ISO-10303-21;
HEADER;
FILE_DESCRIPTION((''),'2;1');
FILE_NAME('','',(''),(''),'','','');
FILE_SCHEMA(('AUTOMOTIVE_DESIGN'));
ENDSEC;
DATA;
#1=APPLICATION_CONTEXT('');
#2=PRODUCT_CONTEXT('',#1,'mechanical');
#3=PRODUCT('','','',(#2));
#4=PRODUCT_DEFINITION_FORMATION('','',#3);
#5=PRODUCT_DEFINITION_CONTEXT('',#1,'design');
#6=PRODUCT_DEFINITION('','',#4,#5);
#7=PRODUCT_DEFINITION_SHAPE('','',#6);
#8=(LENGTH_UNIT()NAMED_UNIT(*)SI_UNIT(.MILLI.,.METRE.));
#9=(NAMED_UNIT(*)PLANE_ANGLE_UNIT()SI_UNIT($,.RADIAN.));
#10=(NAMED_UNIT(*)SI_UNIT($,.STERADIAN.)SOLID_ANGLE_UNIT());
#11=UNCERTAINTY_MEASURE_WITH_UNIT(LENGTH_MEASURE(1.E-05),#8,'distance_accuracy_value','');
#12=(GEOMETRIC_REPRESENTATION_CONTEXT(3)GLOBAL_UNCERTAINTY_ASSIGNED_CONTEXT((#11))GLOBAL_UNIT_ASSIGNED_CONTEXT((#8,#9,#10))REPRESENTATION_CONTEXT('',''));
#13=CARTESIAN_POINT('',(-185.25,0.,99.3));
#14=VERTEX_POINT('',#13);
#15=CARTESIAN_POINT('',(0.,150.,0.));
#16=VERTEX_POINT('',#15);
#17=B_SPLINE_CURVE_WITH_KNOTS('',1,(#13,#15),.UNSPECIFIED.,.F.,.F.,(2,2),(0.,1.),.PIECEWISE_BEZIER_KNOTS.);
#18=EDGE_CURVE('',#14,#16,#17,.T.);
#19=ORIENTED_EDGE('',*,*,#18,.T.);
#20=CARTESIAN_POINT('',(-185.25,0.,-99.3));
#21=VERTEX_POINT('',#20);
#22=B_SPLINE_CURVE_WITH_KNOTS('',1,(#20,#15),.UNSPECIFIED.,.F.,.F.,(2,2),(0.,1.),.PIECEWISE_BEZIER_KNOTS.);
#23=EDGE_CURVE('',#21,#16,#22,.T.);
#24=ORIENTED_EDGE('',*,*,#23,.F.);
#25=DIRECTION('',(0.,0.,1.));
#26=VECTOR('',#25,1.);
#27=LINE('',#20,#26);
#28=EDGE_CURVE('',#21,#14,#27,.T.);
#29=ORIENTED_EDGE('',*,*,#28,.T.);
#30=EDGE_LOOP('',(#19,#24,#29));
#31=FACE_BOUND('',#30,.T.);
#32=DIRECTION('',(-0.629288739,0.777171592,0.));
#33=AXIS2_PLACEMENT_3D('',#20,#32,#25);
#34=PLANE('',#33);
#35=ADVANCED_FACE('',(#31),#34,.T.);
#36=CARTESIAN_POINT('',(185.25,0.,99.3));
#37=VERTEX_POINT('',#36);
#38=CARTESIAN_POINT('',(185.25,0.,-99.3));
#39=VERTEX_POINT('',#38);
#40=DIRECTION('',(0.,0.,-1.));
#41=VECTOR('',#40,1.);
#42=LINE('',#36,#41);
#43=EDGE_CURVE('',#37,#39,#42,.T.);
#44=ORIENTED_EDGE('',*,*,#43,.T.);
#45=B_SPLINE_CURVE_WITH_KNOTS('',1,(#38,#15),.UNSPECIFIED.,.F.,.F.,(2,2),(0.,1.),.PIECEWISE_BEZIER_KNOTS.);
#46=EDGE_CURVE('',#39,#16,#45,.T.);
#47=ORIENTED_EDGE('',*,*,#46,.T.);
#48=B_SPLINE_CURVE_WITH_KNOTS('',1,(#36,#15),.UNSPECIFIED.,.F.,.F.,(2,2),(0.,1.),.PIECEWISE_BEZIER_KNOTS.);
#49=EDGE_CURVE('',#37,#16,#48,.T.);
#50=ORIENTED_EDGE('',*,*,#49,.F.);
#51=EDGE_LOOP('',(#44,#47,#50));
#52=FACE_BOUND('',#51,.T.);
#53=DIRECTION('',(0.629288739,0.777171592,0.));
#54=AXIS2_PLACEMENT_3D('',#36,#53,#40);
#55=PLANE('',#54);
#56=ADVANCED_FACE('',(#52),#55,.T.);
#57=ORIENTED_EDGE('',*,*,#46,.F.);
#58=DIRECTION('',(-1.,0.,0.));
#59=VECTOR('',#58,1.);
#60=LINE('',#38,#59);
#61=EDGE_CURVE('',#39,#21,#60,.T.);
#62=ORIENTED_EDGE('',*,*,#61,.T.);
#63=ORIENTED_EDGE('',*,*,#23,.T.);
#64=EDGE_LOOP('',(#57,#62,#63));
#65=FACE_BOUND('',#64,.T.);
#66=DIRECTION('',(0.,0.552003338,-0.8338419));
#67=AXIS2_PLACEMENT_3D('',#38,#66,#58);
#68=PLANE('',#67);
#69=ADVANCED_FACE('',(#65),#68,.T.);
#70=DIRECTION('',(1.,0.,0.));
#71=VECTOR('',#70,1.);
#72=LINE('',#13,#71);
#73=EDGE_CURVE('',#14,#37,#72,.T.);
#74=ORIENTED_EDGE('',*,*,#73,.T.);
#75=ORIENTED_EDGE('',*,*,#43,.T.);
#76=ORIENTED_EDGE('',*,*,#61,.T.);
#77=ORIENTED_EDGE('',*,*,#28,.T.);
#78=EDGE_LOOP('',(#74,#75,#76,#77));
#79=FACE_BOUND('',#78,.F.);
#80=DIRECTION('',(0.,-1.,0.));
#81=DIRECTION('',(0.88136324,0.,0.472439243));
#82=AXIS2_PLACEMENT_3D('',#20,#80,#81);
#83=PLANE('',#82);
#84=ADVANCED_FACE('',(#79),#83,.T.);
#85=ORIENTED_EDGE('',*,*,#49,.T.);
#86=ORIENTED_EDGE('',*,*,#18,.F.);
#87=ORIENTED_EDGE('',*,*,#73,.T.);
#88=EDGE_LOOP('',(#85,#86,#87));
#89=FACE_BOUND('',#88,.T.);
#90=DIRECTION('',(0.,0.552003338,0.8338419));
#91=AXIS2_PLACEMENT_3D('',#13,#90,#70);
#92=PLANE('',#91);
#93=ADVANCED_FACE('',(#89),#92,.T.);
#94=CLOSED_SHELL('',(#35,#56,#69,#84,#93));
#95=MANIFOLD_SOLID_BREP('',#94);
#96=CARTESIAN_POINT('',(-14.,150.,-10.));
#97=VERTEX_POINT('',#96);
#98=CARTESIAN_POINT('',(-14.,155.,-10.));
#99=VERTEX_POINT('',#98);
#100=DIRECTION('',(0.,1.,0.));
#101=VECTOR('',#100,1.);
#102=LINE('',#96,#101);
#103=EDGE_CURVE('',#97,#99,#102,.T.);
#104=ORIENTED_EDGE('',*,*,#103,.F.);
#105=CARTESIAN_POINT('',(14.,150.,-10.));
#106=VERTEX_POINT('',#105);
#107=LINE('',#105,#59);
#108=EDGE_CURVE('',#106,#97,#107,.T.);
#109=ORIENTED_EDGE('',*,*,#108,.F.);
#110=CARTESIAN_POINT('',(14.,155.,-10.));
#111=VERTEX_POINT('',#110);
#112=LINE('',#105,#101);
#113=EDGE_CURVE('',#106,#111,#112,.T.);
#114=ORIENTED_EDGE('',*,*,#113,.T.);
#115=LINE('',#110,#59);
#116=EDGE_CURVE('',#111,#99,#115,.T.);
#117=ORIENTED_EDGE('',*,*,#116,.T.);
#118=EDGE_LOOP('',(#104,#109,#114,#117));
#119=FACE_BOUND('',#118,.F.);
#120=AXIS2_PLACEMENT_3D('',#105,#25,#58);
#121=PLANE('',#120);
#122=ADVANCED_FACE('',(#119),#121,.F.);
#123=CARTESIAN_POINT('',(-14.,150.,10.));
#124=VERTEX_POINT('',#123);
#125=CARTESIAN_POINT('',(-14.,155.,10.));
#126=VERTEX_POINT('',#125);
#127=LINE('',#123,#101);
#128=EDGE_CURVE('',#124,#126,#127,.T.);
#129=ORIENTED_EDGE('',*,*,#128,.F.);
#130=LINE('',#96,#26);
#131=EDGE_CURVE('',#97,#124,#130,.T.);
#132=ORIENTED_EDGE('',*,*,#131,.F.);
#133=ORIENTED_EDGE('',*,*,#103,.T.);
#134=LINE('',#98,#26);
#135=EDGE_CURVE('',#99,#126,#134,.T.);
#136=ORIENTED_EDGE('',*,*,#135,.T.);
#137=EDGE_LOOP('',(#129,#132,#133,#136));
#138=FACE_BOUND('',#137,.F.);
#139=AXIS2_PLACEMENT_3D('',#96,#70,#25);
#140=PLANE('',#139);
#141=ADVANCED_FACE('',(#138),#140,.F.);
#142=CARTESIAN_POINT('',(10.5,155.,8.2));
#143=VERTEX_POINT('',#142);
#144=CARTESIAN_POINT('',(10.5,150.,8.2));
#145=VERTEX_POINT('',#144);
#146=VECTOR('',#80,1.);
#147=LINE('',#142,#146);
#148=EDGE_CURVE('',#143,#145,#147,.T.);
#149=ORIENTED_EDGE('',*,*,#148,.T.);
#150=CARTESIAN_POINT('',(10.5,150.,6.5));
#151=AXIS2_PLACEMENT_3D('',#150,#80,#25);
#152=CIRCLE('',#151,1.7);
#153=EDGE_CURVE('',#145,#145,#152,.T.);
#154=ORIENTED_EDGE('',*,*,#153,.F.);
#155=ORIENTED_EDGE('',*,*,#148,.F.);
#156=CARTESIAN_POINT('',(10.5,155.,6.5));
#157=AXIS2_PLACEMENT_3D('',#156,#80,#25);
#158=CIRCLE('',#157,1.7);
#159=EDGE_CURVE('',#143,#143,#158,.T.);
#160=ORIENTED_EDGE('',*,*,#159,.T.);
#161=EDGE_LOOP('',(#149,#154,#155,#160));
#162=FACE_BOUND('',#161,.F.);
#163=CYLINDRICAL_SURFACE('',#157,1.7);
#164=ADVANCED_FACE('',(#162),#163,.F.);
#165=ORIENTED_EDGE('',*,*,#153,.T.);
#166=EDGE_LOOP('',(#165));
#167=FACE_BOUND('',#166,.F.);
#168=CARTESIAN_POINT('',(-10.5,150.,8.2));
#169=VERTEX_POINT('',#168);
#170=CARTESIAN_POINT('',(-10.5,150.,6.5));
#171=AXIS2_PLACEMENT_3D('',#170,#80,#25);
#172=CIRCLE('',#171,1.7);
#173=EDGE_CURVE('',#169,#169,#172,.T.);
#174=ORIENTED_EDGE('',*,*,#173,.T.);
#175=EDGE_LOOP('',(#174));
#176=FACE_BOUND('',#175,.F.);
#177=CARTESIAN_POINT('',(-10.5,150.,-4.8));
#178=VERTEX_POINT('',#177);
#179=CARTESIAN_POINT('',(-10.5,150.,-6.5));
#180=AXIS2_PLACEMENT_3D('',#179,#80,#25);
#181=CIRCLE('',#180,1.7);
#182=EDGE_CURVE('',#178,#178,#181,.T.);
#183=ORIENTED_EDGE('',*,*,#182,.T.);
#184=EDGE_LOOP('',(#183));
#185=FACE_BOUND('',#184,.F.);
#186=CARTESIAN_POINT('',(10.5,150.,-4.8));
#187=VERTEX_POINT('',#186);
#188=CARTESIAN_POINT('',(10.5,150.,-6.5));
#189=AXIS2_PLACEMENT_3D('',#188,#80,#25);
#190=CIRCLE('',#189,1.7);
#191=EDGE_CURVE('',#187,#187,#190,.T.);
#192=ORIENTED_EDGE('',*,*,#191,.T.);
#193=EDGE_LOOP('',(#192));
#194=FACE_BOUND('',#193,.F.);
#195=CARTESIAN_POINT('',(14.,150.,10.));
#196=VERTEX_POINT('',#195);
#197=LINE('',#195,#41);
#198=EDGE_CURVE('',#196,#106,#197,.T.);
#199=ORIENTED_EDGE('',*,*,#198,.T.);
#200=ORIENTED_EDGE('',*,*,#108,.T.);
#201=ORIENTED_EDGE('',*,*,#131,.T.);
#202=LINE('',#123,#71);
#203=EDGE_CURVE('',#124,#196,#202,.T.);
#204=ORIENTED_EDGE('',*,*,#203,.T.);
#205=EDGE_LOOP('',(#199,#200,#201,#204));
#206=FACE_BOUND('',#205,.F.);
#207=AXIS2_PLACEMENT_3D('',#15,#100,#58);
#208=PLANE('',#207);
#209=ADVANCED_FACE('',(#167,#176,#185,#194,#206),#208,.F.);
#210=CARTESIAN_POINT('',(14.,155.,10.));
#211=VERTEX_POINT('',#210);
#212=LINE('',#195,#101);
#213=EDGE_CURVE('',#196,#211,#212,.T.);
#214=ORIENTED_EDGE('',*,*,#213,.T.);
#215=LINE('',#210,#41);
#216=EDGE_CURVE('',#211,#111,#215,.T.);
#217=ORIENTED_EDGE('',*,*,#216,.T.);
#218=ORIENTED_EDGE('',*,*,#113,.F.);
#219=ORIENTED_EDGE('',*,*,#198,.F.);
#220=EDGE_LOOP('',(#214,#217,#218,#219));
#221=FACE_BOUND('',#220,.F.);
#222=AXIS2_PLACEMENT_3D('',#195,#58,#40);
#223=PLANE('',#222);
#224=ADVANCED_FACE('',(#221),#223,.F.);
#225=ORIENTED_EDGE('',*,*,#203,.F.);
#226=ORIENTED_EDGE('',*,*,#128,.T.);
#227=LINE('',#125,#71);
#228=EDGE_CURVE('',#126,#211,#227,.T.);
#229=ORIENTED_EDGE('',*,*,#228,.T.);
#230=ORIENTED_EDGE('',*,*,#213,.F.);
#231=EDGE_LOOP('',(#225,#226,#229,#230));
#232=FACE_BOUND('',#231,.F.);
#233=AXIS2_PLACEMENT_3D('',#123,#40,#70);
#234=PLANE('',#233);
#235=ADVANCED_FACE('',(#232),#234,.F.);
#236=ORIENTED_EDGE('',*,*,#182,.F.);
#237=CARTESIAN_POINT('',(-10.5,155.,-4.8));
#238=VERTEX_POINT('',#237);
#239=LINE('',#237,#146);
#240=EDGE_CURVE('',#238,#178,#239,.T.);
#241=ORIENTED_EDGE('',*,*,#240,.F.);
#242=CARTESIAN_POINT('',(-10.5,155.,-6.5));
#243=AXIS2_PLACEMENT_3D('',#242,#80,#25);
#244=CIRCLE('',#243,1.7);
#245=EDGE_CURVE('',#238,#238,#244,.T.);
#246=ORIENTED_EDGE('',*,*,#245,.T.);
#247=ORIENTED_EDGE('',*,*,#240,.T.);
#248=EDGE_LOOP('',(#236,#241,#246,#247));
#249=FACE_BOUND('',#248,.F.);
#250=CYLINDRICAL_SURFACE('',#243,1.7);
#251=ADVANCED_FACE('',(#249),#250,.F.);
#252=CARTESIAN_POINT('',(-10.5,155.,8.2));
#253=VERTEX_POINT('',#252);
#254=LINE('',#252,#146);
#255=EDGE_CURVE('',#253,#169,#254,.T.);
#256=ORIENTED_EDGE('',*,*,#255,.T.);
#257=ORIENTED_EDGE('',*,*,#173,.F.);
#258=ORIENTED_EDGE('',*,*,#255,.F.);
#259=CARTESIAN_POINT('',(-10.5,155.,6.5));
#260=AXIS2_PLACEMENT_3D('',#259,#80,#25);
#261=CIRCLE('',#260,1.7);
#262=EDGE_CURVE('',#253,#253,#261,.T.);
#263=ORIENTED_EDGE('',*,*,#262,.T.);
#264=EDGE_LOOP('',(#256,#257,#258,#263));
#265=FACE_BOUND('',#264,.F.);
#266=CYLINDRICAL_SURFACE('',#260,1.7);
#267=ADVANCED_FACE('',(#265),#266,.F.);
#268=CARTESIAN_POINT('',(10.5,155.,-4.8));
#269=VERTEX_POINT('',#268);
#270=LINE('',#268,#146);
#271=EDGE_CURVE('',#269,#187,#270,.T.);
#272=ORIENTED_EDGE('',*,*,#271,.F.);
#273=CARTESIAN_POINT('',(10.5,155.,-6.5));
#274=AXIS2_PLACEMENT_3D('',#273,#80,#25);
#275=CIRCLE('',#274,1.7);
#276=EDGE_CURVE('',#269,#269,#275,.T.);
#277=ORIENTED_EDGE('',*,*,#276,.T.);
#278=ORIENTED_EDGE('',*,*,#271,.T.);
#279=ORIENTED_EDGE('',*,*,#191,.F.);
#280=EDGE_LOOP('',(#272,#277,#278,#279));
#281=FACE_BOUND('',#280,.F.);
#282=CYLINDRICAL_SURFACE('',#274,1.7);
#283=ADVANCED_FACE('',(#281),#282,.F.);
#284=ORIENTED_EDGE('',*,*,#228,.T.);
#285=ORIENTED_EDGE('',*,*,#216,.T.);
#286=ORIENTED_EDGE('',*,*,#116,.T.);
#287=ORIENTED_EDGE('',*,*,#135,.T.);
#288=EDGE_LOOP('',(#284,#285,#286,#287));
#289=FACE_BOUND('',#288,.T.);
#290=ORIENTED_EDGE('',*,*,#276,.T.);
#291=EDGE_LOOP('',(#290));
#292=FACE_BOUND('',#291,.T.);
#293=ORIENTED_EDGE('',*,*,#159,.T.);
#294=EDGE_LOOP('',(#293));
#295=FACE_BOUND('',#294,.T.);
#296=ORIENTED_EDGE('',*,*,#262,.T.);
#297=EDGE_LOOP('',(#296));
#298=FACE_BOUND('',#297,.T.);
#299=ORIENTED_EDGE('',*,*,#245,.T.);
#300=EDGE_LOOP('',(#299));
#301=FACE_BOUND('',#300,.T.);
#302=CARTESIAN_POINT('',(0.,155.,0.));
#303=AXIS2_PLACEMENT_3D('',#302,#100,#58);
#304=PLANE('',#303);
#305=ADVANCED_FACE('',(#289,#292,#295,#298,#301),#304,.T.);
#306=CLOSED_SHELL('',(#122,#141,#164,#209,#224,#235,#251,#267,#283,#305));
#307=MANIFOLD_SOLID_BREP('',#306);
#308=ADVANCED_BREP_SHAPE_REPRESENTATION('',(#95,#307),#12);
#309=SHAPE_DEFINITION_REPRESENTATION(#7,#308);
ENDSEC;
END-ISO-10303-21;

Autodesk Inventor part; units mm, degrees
ref_plane "YZ Plane" through (0, 0, 0) normal (1, 0, 0) x (0, 1, 0)
ref_plane "XY Plane" through (0, 0, 0) normal (0, 0, 1) x (1, 0, 0)
sketch "Sketch2" plane through (0, 0, 0) normal (0, 1, 0) x (-1, 0, 0)
  line L0 (185.25, 99.3) -> (-185.25, 99.3)
  line L1 (-185.25, 99.3) -> (-185.25, -99.3)
  line L2 (-185.25, -99.3) -> (185.25, -99.3)
  line L3 (185.25, -99.3) -> (185.25, 99.3)
  line L4 (185.25, 0) -> (-185.25, 0) construction
  line L5 (0, 99.3) -> (0, -99.3) construction
  point P0 (0, 0)
  point P1 (0, 0)
  dimension "d0" = 370.5
  dimension "d1" = 198.6
ref_plane "Work Plane1" through (0, 150, 0) normal (0, 1, 0) x (-1, 0, 0)
sketch "Sketch3" plane through (0, 150, 0) normal (0, 1, 0) x (-1, 0, 0)
  line L0 (-185.25, 99.3) -> (-185.25, -99.3) projected
  line L1 (185.25, 99.3) -> (-185.25, 99.3) projected
  line L2 (185.25, -99.3) -> (185.25, 99.3) projected
  line L3 (-185.25, -99.3) -> (185.25, -99.3) projected
  point P0 (0, 0)
  point P1 (0, 0)
loft "Loft1" add profiles "Sketch2" section 2 point at (0, 150, 0)
sketch "Sketch4" plane through (0, 150, 0) normal (0, 1, 0) x (-1, 0, 0)
  line L0 (14, 10) -> (-14, 10)
  line L1 (-14, 10) -> (-14, -10)
  line L2 (-14, -10) -> (14, -10)
  line L3 (14, -10) -> (14, 10)
  line L4 (14, 10) -> (-14, -10) construction
  line L5 (-14, 10) -> (14, -10) construction
  point P0 (0, 0)
  point P1 (0, 0)
  dimension "d7" = 28
  dimension "d8" = 20
extrude "Extrusion1" add sketch "Sketch4" along normal blind 5
sketch "Sketch5" plane through (0, 155, 0) normal (0, 1, 0) x (1, 0, 0)
  line L0 (-185.25, -99.3) -> (0, 0) projected
  line L1 (10.5, -6.5) -> (-10.5, 6.5) construction
  line L2 (-10.5, -6.5) -> (10.5, 6.5) construction
  dimension "d11" = 21
  dimension "d12" = 13
hole "Hole1" at (10.5, 155, 6.5) at (-10.5, 155, 6.5) at (10.5, 155, -6.5) at (-10.5, 155, -6.5) direction (0, -1, 0) diameter 3.4 depth 8 tip angle 118
sketch "Sketch6" plane through (0, 150, 0) normal (0, -1, 0) x (1, 0, 0)
  line L0 (-1, -0.5) -> (1, -0.5)
  line L1 (1, -0.5) -> (1, 0.5)
  line L2 (1, 0.5) -> (-1, 0.5)
  line L3 (-1, 0.5) -> (-1, -0.5)
  line L4 (-1, -0.5) -> (1, 0.5) construction
  line L5 (1, -0.5) -> (-1, 0.5) construction
  point P0 (0, 0)
  dimension "d20" = 2
  dimension "d21" = 1
extrude "Extrusion2" [suppressed]
sketch "Sketch7" plane through (1, -50, 0.5) normal (1, 0, 0) x (0, 0, -1)
  line L0 (1, 0) -> (0, 0) projected
  line L1 (0.5, 0) -> (0.5, 200)
  line L2 (1, 200) -> (1, 0) projected
  point P0 (0.5, 50)
properties part number "cam vision"
